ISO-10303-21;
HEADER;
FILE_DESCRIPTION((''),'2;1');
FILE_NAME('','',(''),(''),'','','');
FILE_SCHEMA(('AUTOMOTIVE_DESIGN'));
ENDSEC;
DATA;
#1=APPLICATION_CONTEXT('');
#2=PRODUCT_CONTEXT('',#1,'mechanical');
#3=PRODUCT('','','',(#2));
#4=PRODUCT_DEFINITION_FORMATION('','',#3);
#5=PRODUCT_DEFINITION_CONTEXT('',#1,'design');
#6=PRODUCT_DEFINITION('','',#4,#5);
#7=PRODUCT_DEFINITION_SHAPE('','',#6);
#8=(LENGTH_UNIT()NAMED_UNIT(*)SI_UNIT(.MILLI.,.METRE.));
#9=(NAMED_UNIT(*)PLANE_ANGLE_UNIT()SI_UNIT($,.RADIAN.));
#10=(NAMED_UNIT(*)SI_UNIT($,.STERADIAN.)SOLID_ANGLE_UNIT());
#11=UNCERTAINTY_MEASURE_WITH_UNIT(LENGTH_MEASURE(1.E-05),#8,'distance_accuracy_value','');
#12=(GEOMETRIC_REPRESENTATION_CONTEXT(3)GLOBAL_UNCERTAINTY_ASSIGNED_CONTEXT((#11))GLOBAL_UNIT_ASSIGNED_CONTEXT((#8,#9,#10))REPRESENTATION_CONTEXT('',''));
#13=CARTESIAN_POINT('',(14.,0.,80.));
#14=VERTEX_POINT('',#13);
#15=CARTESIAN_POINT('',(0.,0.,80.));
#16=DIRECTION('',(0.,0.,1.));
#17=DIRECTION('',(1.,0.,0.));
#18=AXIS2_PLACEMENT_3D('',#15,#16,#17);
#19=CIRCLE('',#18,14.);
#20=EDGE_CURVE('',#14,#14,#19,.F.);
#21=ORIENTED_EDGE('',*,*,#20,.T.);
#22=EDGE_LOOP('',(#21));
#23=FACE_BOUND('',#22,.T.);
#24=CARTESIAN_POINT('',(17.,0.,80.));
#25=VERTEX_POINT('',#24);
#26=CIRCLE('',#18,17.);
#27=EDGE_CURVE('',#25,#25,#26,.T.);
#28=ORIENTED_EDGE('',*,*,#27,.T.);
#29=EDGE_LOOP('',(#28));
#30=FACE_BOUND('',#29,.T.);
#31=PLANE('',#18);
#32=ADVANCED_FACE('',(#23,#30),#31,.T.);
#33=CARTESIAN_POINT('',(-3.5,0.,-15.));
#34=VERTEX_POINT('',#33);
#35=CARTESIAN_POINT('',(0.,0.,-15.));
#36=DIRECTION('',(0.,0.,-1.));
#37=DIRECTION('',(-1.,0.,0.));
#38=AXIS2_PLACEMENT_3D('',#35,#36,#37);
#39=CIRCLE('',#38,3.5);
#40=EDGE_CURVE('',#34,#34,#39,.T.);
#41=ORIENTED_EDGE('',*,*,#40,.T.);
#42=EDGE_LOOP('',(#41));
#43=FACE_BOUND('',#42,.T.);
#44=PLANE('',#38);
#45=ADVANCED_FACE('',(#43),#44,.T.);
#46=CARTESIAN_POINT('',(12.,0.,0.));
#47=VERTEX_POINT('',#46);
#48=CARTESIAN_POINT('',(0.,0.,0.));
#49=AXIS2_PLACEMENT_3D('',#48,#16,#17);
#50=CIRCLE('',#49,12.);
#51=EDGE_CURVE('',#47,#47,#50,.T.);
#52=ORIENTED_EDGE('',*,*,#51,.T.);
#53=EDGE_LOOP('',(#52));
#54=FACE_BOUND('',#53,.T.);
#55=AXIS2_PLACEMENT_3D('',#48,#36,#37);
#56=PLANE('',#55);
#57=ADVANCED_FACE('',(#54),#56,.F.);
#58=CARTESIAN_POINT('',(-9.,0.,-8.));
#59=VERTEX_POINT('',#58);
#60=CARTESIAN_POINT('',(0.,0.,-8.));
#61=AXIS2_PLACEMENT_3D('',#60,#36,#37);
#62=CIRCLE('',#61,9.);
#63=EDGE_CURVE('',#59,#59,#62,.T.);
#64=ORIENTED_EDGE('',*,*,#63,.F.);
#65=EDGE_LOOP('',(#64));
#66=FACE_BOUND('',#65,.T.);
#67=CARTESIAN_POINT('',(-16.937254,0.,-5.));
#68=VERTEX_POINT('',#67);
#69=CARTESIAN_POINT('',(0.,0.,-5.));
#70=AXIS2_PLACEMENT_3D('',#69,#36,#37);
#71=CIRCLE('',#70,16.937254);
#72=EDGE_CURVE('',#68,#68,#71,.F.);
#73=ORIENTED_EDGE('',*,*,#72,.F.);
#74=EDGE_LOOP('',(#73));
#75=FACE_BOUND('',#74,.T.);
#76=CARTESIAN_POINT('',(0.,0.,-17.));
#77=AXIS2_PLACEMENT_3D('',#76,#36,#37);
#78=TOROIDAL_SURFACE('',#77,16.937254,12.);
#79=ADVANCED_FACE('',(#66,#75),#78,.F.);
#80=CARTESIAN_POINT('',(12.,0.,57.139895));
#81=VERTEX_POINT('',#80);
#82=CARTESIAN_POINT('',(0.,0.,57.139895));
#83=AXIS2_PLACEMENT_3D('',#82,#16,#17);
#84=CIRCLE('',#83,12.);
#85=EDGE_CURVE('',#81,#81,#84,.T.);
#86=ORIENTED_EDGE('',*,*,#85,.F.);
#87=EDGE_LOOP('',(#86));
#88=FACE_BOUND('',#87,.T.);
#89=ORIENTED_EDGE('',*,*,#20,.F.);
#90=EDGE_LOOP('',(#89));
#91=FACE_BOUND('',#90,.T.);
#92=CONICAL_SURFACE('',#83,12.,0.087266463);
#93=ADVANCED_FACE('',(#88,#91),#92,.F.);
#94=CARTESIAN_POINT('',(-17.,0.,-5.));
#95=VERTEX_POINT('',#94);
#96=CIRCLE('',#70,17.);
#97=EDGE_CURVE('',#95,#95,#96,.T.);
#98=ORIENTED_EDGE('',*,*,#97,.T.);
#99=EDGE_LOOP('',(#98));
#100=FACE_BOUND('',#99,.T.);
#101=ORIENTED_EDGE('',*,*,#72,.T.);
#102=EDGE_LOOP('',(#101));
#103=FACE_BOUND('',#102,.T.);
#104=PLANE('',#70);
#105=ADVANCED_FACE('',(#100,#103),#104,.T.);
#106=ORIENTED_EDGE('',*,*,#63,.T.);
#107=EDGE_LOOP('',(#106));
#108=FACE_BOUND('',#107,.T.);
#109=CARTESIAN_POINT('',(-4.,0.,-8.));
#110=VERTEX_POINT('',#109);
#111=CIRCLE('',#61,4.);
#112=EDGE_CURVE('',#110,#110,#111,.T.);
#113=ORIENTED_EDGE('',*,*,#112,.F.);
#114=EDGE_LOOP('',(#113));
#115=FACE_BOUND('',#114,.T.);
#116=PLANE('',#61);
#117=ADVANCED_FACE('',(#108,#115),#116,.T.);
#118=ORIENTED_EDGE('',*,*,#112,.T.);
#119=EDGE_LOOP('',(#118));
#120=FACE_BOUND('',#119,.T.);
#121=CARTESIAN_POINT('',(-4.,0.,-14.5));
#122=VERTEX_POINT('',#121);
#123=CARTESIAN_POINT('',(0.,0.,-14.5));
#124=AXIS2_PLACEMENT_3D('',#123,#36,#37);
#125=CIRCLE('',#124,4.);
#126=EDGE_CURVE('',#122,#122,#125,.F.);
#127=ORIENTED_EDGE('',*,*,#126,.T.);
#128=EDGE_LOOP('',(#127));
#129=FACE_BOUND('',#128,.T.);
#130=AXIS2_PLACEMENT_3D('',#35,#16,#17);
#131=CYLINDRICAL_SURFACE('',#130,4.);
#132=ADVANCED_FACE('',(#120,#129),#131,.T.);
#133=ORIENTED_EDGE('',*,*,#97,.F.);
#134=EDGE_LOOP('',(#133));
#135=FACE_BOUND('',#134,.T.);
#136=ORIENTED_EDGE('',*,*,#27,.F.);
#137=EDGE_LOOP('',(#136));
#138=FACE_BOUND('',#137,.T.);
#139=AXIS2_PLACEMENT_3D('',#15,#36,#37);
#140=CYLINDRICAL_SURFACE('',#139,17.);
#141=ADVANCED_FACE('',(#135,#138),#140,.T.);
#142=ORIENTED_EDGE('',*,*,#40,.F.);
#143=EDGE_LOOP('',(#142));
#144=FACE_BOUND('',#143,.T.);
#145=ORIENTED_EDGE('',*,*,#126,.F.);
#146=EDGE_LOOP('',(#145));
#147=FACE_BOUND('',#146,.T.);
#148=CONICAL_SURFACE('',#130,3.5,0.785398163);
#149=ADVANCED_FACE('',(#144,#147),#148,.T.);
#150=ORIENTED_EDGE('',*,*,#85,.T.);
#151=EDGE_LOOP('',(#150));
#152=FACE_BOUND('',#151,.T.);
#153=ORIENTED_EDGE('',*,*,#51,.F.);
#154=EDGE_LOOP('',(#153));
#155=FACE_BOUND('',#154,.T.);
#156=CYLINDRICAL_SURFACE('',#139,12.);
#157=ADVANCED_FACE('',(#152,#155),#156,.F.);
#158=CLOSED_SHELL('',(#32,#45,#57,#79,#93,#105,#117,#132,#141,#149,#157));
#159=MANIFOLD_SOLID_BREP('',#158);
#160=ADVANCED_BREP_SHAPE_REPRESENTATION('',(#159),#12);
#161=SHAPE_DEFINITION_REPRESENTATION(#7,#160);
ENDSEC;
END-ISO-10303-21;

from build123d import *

# Parameters (mm, degrees)
SKETCH1_R           = 17
SKETCH1_R_2         = 12
BOSS_EXTRUDE1_DEPTH = 80
CHAMFER1_SIZE       = 2
CHAMFER1_SIZE2      = 22.860104606
BOSS_EXTRUDE2_START = 5
SKETCH2_R           = 17
BOSS_EXTRUDE2_DEPTH = 5
SKETCH3_R           = 9
SKETCH3_R_2         = 4
BOSS_EXTRUDE3_DEPTH = 3
BOSS_EXTRUDE4_START = 3
SKETCH3_3_R         = 4
BOSS_EXTRUDE4_DEPTH = 7
FILLET1_R           = 12
CHAMFER2_SIZE       = 0.5


with BuildPart() as part:
    # Sketch1 → Boss-Extrude1 (new body)
    with BuildSketch(Plane.XY):
        Circle(SKETCH1_R)
        Circle(SKETCH1_R_2, mode=Mode.SUBTRACT)
    extrude(amount=BOSS_EXTRUDE1_DEPTH)

    # Chamfer1
    chamfer1_edges = [part.edges().sort_by_distance(p)[0] for p in [
        (-12, 0, 80),
    ]]
    chamfer1_side = [part.faces().sort_by_distance(p)[0] for p in [
        (-16.519167389, 0, 80),
    ]]
    chamfer(chamfer1_edges, length=CHAMFER1_SIZE, length2=CHAMFER1_SIZE2, reference=chamfer1_side[0])

    # Sketch2 → Boss-Extrude2 (add)
    with BuildSketch(Plane(origin=(0, 0, 0), x_dir=(-1, 0, 0), z_dir=(0, 0, -1)).offset(BOSS_EXTRUDE2_START)):
        Circle(SKETCH2_R)
    extrude(amount=-BOSS_EXTRUDE2_DEPTH)

    # Sketch3 → Boss-Extrude3 (add)
    # profile 1 of 2: a face of its own
    with BuildSketch(Plane(origin=(0, 0, -5), x_dir=(-1, 0, 0), z_dir=(0, 0, -1))):
        Circle(SKETCH3_R)
        Circle(SKETCH3_R_2, mode=Mode.SUBTRACT)
    # profile 2 of 2: a face of its own
    with BuildSketch(Plane(origin=(0, 0, -5), x_dir=(-1, 0, 0), z_dir=(0, 0, -1))):
        Circle(SKETCH3_R_2)
    extrude(amount=BOSS_EXTRUDE3_DEPTH)

    # Sketch3<3> → Boss-Extrude4 (add)
    with BuildSketch(Plane(origin=(0, 0, -5), x_dir=(-1, 0, 0), z_dir=(0, 0, -1)).offset(BOSS_EXTRUDE4_START)):
        Circle(SKETCH3_3_R)
    extrude(amount=BOSS_EXTRUDE4_DEPTH)

    # Fillet1
    # the kernel refuses this fillet: 12 mm, written as the material it adds along each edge
    with BuildSketch(Plane(origin=(0, 0, -5), x_dir=(-1, 0, 0), z_dir=(0, -1, 0))) as fillet1_piece_1:
        with BuildLine():
            CenterArc((16.937253933, 12), FILLET1_R, 228.590377891, 41.409622109)
            Line((9, 3), (9, 0))
            Line((9, 0), (16.937253933, 0))
        make_face()
    revolve(axis=Axis((0, 0, -5), (0, 0, -1)))

    # Chamfer2
    chamfer2_edges = [part.edges().sort_by_distance(p)[0] for p in [
        (4, 0, -15),
    ]]
    chamfer(chamfer2_edges, length=CHAMFER2_SIZE)


solid = part.part
